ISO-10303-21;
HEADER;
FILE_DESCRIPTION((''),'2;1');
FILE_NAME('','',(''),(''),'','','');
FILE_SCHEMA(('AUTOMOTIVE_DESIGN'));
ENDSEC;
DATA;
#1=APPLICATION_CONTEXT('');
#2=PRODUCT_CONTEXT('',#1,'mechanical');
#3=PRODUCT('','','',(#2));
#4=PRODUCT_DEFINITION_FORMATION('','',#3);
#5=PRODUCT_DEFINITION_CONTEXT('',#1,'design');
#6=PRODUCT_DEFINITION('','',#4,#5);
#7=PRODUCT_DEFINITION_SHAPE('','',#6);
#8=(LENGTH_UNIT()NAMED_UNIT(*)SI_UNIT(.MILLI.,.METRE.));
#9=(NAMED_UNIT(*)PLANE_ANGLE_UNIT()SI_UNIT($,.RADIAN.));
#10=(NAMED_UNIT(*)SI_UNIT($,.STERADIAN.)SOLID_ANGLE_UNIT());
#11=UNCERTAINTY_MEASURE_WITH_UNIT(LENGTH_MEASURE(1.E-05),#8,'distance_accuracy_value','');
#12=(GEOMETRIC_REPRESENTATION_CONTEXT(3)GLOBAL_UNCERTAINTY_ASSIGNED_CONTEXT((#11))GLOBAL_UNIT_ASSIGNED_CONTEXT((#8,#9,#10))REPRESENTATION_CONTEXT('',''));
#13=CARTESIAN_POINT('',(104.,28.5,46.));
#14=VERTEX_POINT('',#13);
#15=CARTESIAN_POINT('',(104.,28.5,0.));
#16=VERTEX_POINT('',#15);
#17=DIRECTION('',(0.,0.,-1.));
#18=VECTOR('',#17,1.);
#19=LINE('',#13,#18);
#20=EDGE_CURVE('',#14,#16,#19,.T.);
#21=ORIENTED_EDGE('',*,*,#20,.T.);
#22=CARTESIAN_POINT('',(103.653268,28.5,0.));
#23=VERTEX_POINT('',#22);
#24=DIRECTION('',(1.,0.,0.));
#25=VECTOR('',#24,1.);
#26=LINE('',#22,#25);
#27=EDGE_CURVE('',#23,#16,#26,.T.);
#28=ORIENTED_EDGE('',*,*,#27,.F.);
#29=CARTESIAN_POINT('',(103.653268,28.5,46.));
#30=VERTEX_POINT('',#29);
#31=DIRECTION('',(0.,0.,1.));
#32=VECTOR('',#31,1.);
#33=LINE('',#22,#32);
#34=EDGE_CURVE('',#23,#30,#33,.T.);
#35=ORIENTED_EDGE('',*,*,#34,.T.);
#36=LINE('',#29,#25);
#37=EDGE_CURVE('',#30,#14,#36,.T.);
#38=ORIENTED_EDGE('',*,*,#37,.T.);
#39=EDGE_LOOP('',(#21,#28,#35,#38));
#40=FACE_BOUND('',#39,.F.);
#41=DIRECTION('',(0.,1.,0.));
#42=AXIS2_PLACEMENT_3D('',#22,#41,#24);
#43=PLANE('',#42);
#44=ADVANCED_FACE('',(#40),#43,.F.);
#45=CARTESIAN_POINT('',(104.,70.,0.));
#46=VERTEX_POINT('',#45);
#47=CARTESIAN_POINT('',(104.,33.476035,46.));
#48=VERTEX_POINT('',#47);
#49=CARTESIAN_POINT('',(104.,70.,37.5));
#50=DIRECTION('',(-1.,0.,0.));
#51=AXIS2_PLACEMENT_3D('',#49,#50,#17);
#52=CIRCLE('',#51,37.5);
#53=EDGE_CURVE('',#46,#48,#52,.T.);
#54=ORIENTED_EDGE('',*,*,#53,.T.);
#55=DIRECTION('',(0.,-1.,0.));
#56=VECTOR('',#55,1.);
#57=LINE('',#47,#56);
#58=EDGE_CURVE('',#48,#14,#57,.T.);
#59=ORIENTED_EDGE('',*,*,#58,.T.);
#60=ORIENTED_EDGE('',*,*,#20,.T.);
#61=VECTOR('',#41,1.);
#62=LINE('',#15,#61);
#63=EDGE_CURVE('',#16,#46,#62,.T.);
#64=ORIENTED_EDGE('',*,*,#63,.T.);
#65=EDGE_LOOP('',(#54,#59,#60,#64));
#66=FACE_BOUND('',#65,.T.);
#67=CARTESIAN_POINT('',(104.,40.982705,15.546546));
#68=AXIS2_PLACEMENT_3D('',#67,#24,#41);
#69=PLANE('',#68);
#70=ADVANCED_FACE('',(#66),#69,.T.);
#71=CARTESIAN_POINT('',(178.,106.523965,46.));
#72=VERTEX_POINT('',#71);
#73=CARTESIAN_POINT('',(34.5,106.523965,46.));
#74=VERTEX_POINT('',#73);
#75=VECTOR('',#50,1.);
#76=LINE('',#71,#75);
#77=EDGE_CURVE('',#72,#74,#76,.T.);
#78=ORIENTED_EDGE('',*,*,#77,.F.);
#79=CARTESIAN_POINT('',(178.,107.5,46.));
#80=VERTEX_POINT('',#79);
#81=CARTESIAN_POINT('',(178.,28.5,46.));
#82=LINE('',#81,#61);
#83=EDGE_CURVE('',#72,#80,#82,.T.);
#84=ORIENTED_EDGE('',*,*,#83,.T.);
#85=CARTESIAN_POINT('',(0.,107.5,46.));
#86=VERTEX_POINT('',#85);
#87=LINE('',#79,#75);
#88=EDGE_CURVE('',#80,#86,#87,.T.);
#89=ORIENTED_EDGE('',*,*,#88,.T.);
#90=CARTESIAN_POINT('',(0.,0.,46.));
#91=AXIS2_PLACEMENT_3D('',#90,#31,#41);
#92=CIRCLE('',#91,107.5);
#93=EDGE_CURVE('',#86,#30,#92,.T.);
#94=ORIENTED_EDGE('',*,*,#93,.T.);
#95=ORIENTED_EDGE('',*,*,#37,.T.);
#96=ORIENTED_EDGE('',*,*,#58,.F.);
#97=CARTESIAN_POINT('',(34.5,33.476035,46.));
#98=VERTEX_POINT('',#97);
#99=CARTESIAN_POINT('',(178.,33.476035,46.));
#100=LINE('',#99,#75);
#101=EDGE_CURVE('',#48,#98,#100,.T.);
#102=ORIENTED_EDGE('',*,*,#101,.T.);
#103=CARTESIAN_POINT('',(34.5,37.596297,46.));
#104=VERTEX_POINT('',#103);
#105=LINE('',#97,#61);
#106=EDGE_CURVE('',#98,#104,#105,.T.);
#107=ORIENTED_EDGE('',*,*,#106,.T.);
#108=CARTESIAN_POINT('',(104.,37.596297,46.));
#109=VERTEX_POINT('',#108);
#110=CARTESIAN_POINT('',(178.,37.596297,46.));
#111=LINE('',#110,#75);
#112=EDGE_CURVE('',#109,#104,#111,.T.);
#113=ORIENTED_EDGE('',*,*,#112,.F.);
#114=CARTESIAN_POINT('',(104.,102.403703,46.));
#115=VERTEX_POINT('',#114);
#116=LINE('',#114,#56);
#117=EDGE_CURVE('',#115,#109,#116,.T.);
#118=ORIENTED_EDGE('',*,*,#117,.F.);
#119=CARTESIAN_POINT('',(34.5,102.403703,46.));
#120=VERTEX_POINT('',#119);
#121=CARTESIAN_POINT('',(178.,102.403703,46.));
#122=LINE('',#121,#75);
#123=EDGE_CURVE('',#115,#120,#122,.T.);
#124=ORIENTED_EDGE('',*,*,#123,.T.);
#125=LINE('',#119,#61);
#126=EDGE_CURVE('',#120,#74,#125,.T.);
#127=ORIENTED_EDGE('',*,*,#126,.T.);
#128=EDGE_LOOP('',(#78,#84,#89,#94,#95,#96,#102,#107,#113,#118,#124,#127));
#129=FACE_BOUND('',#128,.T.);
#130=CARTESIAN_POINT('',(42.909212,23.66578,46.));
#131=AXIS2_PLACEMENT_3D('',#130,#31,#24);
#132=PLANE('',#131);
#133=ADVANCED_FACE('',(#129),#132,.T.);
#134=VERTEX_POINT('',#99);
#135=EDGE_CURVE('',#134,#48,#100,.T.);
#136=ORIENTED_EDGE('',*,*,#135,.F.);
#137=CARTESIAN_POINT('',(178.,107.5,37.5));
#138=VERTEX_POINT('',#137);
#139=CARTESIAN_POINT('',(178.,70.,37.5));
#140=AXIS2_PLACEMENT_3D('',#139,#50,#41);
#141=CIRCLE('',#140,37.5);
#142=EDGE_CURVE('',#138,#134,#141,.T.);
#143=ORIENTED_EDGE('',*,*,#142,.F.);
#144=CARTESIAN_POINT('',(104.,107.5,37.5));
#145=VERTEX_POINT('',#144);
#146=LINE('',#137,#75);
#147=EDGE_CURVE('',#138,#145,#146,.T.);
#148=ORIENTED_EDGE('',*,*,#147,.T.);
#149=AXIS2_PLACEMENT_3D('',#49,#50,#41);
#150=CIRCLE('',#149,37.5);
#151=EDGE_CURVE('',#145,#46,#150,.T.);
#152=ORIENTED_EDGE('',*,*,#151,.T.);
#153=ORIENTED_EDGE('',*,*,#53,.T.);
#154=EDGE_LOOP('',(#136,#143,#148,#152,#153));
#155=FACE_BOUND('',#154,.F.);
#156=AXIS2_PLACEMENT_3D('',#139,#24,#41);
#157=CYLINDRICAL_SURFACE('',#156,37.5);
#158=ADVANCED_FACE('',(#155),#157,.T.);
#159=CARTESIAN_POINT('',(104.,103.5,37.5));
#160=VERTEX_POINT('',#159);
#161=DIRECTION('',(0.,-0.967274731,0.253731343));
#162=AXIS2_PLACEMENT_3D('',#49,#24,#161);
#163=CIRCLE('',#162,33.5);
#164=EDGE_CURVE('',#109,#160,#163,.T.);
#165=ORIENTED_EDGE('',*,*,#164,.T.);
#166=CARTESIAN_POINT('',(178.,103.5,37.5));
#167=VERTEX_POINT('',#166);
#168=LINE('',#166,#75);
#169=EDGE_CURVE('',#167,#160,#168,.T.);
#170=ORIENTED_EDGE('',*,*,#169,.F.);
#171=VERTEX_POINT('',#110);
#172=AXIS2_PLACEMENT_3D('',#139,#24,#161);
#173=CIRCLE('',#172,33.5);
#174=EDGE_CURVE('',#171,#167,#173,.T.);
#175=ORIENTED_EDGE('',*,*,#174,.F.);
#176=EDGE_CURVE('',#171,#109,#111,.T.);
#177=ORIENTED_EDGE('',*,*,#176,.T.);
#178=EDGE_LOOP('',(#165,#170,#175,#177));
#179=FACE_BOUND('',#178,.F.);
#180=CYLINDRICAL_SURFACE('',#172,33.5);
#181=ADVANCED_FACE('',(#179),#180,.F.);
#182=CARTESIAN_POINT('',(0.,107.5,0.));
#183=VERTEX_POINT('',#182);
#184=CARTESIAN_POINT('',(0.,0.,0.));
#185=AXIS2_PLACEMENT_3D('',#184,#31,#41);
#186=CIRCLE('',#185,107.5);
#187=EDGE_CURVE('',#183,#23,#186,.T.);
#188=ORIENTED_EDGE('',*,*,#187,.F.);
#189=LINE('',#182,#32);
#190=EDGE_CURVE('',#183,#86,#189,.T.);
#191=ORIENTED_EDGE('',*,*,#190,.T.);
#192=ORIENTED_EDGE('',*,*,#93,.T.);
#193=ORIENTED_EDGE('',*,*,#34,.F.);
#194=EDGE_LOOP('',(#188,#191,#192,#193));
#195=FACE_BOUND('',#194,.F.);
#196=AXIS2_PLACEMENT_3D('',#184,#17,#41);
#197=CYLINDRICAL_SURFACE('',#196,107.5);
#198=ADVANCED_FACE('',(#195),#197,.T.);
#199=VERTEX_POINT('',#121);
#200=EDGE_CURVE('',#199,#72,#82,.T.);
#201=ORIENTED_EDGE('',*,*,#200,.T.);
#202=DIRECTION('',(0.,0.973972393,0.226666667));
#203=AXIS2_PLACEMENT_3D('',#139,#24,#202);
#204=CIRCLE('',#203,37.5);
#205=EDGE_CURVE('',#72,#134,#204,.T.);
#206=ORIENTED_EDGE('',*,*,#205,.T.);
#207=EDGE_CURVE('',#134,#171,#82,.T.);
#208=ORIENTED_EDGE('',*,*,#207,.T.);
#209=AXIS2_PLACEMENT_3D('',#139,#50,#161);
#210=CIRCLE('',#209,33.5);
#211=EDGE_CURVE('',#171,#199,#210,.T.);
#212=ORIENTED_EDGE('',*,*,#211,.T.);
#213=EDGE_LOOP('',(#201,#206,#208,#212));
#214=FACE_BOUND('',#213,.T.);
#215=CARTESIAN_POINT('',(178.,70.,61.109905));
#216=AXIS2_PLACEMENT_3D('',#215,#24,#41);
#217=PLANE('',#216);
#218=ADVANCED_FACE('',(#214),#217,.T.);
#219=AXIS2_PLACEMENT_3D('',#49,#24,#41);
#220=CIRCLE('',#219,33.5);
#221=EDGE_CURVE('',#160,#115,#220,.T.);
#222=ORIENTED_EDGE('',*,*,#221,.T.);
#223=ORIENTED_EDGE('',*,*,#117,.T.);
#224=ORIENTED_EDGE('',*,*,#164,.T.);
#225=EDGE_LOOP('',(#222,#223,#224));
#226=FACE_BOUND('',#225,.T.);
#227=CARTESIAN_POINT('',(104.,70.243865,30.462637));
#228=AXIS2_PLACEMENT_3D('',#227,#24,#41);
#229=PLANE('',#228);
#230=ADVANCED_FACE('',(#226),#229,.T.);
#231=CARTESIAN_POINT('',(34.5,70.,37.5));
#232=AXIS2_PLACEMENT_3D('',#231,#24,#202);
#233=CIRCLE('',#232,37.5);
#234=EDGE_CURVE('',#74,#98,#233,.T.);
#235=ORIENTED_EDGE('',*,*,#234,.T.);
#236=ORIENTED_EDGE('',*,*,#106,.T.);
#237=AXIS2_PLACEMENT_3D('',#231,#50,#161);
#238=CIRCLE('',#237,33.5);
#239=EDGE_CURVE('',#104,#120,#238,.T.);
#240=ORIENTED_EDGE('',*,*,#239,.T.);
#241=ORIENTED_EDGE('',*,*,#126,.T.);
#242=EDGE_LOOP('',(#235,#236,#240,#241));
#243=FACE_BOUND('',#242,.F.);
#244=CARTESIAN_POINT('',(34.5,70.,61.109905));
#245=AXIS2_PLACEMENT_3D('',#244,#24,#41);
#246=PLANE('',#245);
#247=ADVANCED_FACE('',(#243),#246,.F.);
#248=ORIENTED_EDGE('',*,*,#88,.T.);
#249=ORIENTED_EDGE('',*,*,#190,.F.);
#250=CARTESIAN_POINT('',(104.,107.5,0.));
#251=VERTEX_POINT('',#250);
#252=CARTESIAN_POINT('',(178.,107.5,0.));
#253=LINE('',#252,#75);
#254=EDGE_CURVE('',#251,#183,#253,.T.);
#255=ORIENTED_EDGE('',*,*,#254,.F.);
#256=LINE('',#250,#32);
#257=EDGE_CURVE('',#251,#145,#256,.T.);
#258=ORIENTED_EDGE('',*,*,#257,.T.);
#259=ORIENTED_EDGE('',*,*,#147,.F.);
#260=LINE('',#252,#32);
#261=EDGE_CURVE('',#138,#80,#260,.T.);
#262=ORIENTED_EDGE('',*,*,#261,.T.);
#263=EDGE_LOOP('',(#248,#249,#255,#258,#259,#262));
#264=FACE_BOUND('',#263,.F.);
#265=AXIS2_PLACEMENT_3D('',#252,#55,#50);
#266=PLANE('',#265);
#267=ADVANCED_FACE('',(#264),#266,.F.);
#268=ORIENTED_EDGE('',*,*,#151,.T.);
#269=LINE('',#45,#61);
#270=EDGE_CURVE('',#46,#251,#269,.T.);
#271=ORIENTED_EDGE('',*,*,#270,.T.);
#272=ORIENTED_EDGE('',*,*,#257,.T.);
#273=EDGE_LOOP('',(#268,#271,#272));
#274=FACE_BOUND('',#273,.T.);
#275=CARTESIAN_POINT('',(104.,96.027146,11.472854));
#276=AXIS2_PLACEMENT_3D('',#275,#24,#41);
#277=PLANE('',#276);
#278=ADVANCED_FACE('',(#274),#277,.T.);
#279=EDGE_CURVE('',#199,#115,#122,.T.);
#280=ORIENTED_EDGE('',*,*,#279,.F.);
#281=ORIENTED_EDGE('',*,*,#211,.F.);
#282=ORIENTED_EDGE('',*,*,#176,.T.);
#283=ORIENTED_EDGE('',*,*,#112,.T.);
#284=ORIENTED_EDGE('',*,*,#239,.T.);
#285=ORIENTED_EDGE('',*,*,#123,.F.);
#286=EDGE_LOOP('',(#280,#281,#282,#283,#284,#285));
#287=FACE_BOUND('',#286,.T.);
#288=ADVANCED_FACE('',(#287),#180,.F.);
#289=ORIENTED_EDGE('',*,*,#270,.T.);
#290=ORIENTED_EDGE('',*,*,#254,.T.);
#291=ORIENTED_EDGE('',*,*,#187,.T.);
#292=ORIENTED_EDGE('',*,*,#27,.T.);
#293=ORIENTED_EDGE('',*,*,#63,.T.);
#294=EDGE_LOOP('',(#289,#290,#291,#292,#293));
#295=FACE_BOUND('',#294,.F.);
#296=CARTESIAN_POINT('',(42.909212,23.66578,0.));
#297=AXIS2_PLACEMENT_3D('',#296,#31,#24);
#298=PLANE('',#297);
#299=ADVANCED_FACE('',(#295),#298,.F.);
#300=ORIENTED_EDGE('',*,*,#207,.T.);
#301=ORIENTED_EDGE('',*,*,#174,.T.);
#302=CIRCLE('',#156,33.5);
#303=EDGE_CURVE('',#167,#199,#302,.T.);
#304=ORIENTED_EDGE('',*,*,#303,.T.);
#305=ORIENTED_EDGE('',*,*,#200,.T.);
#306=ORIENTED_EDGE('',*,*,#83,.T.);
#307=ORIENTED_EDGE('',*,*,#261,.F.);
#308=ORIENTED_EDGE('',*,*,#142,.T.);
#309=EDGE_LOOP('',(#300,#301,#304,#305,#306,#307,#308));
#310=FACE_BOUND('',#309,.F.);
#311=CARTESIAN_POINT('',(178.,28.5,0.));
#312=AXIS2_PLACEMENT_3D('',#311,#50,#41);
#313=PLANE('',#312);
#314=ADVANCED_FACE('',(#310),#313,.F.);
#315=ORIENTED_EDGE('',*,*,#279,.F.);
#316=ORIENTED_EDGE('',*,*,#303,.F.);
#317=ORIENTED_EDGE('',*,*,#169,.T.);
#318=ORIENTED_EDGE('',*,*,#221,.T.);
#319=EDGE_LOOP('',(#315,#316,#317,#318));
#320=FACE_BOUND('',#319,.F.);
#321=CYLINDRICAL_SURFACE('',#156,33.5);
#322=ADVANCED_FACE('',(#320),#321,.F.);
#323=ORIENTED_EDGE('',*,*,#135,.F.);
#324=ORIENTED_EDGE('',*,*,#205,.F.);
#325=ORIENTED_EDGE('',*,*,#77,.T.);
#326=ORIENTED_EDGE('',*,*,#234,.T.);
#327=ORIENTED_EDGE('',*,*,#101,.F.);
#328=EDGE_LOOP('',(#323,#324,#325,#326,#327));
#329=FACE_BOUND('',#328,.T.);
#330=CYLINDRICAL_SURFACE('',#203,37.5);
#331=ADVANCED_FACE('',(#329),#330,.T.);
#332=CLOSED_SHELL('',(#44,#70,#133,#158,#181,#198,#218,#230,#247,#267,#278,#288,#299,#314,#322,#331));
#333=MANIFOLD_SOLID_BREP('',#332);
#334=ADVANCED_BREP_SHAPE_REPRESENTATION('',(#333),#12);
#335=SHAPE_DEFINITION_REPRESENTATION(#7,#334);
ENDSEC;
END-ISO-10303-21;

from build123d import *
from build123d import SkipClean  # not in build123d's __all__

# Parameters (mm, degrees)
F1_DEPTH = 46
F3_DEPTH = 74
F4_DEPTH = 143.5


with BuildPart() as f1:
    # F0 (on Top) → F1 (new body)
    with BuildSketch(Plane.XY):
        with BuildLine():
            Line((178, 107.5), (0, 107.5))
            ThreePointArc((0, 107.5), (-65.1632565178, -85.4985379992), (103.6532681588, 28.5))
            Line((103.6532681588, 28.5), (178, 28.5))
            Line((178, 28.5), (178, 107.5))
        make_face()
    extrude(amount=F1_DEPTH)

    # F2 (on face) → F3 (cut)
    with BuildSketch(Plane.YZ.offset(178)):
        with BuildLine():
            ThreePointArc((70, 0), (40.6316496888, 14.1815523673), (33.4760352645, 46))
            Line((33.4760352645, 46), (28.5, 46))
            Line((28.5, 46), (28.5, 0))
            Line((28.5, 0), (70, 0))
        make_face()
        with BuildLine():
            Line((107.5, 0), (107.5, 37.5))
            ThreePointArc((107.5, 37.5), (96.5165042945, 10.9834957055), (70, 0))
            Line((70, 0), (107.5, 0))
        make_face()
        with BuildLine():
            ThreePointArc((37.596296508, 46), (65.714796795, 4.275204538), (103.5, 37.5))
            ThreePointArc((103.5, 37.5), (103.224795462, 41.785203205), (102.403703492, 46))
            Line((102.403703492, 46), (37.596296508, 46))
        make_face()
    extrude(amount=-F3_DEPTH, mode=Mode.SUBTRACT)

    # F2 (on face) → F4 (join)
    with BuildSketch(Plane.YZ.offset(178)):
        with BuildLine():
            ThreePointArc((37.596296508, 46), (70, 71), (102.403703492, 46))
            Line((102.403703492, 46), (106.5239647355, 46))
            ThreePointArc((106.5239647355, 46), (70, 75), (33.4760352645, 46))
            Line((33.4760352645, 46), (37.596296508, 46))
        make_face()
    with SkipClean():  # cleaning this boolean's faces spoils the solid; the shape is the same uncleaned
        extrude(amount=-F4_DEPTH)


solid = f1.part
